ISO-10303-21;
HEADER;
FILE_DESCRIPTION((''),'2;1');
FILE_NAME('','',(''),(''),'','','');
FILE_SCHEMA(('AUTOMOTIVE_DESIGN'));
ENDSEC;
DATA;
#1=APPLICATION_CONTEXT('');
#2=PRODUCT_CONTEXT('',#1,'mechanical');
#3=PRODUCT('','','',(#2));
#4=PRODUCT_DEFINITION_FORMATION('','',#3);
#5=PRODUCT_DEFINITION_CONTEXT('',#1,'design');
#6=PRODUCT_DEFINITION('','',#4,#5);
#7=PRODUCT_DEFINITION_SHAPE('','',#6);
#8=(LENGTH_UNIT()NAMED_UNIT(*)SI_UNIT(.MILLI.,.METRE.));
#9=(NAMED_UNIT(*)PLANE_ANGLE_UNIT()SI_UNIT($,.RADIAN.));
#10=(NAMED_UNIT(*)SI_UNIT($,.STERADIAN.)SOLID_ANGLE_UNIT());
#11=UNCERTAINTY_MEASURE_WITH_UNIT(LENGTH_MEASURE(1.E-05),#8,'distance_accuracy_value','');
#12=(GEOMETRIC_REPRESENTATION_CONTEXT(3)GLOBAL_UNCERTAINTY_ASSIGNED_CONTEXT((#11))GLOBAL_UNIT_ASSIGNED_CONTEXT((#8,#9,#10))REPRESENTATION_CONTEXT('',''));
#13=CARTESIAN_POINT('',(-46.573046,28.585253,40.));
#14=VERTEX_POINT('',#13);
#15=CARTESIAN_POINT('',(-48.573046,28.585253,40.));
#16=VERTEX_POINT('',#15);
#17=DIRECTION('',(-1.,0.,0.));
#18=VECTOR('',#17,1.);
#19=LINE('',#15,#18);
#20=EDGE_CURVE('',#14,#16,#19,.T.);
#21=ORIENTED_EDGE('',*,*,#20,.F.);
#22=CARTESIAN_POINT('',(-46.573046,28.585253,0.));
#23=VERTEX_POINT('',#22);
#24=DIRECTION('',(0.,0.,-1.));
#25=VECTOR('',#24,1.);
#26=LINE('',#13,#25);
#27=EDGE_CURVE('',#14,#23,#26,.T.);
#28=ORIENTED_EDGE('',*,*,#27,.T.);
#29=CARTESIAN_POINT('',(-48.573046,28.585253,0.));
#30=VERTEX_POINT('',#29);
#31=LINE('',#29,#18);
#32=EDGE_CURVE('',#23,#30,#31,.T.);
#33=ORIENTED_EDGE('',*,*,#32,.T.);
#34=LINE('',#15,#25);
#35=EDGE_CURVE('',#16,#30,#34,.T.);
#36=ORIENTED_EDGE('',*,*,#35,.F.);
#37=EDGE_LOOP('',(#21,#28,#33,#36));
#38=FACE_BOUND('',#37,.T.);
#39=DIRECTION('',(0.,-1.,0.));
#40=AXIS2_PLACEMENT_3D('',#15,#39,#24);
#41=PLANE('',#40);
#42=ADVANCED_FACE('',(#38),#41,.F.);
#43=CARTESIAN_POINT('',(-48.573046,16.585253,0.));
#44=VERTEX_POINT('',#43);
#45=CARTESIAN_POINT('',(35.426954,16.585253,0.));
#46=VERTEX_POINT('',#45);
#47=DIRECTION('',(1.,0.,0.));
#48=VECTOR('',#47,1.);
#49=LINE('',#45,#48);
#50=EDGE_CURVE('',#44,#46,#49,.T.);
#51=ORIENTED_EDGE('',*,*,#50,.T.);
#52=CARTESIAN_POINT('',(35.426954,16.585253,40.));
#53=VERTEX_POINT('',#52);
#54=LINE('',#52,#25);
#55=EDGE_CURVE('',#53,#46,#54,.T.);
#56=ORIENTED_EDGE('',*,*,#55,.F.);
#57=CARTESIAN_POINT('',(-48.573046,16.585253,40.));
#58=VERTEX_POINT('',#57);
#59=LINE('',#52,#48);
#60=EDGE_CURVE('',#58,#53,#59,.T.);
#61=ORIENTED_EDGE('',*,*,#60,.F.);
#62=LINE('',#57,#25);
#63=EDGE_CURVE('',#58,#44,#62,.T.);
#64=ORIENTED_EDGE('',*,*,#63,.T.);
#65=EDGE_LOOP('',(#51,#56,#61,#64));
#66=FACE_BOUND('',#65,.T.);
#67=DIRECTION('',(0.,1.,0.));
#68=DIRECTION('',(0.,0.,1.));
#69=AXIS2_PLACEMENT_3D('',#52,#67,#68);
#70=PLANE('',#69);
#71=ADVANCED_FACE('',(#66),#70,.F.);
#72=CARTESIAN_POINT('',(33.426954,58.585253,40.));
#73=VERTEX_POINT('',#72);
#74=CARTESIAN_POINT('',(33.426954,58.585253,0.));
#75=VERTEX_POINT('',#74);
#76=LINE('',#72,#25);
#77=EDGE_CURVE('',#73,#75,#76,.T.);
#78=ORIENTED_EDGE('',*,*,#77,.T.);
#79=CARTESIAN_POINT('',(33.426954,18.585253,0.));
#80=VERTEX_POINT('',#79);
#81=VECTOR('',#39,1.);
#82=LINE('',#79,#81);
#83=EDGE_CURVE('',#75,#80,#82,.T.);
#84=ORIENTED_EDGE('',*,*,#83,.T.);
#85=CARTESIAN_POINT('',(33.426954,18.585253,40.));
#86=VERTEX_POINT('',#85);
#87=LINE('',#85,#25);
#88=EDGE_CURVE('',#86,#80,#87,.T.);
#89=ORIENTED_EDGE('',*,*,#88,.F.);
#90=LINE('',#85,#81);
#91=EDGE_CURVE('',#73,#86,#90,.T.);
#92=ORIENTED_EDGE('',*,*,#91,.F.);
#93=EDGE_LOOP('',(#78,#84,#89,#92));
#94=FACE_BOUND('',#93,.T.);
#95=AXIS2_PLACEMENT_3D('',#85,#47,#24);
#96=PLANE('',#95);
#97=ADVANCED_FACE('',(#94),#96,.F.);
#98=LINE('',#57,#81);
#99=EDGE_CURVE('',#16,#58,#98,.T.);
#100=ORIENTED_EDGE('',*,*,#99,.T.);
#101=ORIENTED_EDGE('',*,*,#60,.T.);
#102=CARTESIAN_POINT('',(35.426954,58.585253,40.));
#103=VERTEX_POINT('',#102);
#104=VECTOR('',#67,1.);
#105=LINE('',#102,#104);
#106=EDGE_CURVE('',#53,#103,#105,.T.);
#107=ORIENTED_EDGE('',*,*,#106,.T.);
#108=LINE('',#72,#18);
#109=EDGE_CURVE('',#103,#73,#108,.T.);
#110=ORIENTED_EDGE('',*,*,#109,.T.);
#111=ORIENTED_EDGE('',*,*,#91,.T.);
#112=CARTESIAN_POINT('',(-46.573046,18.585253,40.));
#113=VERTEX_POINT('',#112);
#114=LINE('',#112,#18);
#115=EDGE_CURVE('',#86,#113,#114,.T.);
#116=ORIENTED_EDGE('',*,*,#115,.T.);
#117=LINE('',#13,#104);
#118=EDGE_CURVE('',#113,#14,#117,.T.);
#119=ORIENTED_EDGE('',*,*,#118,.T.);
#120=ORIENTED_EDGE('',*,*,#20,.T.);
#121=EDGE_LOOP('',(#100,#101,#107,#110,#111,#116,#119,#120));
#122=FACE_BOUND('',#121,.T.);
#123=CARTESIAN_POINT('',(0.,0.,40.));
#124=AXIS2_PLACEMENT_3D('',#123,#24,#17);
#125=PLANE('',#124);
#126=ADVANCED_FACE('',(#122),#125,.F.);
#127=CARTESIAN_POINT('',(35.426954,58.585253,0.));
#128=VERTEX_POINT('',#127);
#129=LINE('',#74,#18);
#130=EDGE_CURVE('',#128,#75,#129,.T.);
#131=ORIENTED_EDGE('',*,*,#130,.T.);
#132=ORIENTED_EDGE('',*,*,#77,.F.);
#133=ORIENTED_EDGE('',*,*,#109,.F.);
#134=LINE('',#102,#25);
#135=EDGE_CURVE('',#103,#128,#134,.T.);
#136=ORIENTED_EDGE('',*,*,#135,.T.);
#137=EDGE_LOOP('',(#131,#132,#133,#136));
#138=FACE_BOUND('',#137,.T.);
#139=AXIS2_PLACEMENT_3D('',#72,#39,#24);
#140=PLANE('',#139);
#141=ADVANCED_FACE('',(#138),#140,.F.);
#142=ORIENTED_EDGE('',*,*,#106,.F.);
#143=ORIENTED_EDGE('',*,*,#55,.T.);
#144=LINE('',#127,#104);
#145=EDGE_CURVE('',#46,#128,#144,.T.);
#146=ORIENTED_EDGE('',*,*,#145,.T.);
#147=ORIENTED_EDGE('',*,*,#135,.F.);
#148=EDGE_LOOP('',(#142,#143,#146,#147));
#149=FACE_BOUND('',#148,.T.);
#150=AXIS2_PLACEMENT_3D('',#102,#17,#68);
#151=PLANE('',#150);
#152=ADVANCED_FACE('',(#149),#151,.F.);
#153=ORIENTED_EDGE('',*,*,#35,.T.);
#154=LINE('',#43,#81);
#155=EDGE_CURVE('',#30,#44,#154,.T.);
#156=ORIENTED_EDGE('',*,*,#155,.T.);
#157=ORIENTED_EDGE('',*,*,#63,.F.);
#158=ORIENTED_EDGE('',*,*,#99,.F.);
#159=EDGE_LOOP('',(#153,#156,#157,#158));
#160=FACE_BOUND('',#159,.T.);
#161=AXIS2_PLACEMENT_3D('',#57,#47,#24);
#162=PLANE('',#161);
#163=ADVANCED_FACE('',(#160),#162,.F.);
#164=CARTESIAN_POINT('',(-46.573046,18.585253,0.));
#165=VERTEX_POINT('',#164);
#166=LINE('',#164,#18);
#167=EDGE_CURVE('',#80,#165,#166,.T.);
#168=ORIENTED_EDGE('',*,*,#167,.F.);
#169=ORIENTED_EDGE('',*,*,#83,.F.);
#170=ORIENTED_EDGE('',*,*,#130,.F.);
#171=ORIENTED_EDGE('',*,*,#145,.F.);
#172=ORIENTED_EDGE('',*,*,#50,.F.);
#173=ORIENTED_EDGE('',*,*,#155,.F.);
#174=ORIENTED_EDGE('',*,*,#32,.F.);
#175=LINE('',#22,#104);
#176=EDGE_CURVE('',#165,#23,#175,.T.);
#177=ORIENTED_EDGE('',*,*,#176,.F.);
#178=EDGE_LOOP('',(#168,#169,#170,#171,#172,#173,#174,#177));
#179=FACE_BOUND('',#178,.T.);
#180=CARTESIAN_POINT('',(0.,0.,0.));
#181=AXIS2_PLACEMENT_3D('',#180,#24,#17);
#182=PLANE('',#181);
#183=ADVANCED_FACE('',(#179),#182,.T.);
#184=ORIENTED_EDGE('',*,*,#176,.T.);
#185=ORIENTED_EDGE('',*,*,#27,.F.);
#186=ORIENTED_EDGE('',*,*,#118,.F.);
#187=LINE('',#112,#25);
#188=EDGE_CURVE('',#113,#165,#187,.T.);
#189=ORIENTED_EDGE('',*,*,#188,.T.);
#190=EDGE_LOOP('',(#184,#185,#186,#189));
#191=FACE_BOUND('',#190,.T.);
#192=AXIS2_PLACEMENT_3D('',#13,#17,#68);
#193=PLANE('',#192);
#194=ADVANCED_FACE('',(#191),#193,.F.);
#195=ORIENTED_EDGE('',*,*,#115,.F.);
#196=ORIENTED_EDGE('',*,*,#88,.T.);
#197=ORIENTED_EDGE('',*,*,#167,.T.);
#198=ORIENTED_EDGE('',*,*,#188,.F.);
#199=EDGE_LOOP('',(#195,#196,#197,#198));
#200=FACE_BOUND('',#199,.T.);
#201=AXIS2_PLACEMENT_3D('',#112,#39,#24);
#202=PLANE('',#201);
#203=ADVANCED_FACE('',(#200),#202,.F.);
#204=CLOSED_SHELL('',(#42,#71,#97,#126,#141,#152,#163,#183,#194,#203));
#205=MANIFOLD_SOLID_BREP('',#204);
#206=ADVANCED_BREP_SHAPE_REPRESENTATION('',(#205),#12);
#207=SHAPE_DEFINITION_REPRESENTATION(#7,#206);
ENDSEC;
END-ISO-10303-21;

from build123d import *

# Parameters (mm, degrees)
EXTRUDE_1_DEPTH = 40


with BuildPart() as part:
    # 草图1 → 凸台-拉伸1 (new body)
    with BuildSketch(Plane.XY):
        Polygon((-46.573046286, 28.58525296), (-46.573046286, 18.58525296), (33.426953714, 18.58525296), (33.426953714, 58.58525296), (35.426953714, 58.58525296), (35.426953714, 16.58525296), (-48.573046286, 16.58525296), (-48.573046286, 28.58525296), align=None)
    extrude(amount=EXTRUDE_1_DEPTH)


solid = part.part
